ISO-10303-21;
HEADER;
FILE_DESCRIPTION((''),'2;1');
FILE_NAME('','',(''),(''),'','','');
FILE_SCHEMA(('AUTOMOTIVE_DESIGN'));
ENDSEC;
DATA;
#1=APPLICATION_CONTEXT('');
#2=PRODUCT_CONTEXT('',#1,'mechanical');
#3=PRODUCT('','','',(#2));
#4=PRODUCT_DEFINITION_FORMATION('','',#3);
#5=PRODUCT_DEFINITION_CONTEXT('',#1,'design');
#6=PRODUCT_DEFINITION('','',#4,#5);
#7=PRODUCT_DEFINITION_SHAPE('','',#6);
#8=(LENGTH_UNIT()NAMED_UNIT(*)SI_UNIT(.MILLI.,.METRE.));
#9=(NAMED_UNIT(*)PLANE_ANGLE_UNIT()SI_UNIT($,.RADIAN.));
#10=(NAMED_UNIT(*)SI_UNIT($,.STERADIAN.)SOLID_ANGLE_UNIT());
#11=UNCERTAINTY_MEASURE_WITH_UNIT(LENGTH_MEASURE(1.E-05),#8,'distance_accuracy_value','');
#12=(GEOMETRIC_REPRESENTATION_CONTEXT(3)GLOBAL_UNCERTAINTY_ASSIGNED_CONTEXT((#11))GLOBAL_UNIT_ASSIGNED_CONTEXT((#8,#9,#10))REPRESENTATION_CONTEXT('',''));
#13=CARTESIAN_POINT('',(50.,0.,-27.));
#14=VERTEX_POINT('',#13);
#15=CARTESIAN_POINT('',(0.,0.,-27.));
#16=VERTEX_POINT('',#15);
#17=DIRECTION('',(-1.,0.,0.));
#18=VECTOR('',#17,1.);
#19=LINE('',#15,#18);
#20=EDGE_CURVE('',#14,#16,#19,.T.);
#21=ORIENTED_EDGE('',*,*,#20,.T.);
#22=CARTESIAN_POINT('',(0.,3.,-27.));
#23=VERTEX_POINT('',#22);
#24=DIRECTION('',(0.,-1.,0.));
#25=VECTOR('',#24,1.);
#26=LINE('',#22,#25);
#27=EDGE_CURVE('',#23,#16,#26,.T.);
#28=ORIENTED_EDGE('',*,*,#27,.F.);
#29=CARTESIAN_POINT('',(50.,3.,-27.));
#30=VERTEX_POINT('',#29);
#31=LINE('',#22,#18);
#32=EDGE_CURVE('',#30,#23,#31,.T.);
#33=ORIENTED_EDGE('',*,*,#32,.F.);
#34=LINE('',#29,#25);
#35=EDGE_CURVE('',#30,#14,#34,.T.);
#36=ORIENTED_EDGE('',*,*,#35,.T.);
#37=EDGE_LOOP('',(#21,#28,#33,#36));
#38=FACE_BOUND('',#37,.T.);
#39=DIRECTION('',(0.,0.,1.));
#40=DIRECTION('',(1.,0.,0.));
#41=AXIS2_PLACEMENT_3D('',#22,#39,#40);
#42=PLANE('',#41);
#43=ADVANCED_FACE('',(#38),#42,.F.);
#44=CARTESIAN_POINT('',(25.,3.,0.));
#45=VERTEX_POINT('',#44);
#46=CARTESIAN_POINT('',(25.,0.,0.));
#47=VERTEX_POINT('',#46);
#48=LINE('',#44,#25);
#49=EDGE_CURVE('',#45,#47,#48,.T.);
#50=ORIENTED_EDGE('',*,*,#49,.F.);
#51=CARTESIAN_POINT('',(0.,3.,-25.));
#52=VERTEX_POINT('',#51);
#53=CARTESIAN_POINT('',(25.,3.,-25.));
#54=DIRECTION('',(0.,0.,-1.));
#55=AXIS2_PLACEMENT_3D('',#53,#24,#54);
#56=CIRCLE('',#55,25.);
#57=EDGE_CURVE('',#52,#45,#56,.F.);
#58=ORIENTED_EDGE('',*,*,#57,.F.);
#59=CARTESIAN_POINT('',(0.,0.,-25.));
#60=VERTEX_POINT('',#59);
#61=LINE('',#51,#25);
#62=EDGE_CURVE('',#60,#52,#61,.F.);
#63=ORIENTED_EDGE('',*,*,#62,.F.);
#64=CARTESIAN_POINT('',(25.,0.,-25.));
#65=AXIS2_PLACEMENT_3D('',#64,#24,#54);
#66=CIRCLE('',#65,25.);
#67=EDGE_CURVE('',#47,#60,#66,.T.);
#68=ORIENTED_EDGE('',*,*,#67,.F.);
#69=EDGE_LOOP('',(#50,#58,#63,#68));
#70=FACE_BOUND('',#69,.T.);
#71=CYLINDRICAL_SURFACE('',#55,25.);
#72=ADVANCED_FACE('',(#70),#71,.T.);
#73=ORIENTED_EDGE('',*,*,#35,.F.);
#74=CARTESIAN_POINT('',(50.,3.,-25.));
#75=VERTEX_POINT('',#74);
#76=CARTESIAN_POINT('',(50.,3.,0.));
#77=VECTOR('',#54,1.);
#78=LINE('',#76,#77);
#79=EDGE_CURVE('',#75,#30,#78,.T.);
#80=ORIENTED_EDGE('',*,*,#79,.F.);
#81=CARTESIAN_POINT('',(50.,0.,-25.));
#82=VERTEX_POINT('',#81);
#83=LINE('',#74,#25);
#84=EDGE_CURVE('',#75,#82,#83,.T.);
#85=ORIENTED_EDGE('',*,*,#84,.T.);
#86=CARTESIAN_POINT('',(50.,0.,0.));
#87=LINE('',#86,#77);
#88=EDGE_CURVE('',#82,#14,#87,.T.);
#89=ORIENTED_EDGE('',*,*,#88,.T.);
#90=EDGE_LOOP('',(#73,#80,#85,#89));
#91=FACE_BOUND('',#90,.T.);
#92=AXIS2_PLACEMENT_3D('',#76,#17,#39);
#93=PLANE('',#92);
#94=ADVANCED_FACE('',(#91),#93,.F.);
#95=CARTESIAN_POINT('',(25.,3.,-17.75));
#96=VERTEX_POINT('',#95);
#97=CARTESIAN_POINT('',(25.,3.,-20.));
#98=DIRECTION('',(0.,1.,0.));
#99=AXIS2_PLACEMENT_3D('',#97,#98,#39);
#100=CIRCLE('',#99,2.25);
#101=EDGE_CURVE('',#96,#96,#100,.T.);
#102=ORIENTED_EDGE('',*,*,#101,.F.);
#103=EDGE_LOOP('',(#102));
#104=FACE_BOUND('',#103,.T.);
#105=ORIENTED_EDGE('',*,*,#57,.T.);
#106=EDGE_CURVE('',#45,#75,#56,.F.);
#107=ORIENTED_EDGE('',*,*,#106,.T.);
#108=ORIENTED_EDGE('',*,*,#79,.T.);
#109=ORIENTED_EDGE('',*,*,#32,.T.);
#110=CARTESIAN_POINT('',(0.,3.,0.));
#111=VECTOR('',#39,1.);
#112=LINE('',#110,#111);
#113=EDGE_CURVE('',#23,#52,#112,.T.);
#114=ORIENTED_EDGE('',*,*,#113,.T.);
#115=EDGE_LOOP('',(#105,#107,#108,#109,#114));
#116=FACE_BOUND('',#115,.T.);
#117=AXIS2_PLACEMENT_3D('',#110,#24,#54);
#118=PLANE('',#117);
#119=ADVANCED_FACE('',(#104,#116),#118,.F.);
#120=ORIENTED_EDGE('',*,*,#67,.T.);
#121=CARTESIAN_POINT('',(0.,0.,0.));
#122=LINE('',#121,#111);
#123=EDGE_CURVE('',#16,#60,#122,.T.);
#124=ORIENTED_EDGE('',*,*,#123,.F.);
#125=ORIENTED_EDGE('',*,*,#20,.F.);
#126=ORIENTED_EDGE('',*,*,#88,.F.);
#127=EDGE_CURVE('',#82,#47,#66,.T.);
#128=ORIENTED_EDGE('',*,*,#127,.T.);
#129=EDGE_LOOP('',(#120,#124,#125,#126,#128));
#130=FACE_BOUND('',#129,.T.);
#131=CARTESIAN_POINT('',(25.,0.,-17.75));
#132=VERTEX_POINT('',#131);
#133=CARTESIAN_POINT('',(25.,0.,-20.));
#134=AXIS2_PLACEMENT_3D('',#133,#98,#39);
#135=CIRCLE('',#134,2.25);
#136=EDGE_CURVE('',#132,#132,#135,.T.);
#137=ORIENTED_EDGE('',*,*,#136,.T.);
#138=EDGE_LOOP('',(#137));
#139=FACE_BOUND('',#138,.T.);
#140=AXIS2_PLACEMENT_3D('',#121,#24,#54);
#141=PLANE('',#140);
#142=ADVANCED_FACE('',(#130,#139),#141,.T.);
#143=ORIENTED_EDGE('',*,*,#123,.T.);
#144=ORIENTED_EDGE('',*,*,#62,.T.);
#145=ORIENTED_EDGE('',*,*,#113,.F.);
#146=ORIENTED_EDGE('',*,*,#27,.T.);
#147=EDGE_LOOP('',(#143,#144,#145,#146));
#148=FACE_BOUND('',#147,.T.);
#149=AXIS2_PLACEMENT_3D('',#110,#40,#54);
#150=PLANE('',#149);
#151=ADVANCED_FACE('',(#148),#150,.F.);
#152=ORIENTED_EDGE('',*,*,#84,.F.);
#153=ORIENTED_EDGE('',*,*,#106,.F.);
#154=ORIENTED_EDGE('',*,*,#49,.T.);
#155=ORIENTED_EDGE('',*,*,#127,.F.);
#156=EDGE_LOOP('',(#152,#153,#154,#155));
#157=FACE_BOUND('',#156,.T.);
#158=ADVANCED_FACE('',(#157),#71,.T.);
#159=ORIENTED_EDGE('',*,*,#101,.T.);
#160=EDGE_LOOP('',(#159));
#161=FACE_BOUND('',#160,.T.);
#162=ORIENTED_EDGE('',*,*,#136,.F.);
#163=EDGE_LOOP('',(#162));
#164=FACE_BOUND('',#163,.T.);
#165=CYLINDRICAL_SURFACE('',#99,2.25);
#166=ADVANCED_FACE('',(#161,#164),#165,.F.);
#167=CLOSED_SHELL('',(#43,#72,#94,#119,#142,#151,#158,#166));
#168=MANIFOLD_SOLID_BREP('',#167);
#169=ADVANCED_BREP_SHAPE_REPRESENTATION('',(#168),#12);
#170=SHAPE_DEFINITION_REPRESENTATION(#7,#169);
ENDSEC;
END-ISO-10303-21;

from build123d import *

# Parameters (mm, degrees)
SKETCH1_W                = 50
SKETCH1_H                = 27
BOSS_EXTRUDE1_DEPTH      = 3
FILLET1_R                = 25
M4_CLEARANCE_HOLE2_D     = 4.5
M4_CLEARANCE_HOLE2_DEPTH = 3
M4_CLEARANCE_HOLE2_TIP   = 1.351936393


with BuildPart() as part:
    # Sketch1 → Boss-Extrude1 (new body)
    with BuildSketch(Plane(origin=(0, 0, 0), x_dir=(1, 0, 0), z_dir=(0, 1, 0))):
        with Locations((25, 13.5)):
            Rectangle(SKETCH1_W, SKETCH1_H)
    extrude(amount=BOSS_EXTRUDE1_DEPTH)

    # Fillet1
    fillet1_edges = [part.edges().sort_by_distance(p)[0] for p in [
        (50, 1.5, 0),
        (0, 1.5, 0),
    ]]
    fillet(fillet1_edges, radius=FILLET1_R - 0.0001)  # a hair under: the kernel refuses the full size

    # M4 Clearance Hole2
    with Locations(Plane(origin=(0, 3, 0), x_dir=(1, 0, 0), z_dir=(0, 1, 0))):
        with Locations((25, 20)):
            Hole(M4_CLEARANCE_HOLE2_D / 2, depth=M4_CLEARANCE_HOLE2_DEPTH)
            with Locations((0, 0, -(M4_CLEARANCE_HOLE2_DEPTH + M4_CLEARANCE_HOLE2_TIP / 2))):  # 118° drill point
                Cone(0, M4_CLEARANCE_HOLE2_D / 2, M4_CLEARANCE_HOLE2_TIP, mode=Mode.SUBTRACT)


solid = part.part
